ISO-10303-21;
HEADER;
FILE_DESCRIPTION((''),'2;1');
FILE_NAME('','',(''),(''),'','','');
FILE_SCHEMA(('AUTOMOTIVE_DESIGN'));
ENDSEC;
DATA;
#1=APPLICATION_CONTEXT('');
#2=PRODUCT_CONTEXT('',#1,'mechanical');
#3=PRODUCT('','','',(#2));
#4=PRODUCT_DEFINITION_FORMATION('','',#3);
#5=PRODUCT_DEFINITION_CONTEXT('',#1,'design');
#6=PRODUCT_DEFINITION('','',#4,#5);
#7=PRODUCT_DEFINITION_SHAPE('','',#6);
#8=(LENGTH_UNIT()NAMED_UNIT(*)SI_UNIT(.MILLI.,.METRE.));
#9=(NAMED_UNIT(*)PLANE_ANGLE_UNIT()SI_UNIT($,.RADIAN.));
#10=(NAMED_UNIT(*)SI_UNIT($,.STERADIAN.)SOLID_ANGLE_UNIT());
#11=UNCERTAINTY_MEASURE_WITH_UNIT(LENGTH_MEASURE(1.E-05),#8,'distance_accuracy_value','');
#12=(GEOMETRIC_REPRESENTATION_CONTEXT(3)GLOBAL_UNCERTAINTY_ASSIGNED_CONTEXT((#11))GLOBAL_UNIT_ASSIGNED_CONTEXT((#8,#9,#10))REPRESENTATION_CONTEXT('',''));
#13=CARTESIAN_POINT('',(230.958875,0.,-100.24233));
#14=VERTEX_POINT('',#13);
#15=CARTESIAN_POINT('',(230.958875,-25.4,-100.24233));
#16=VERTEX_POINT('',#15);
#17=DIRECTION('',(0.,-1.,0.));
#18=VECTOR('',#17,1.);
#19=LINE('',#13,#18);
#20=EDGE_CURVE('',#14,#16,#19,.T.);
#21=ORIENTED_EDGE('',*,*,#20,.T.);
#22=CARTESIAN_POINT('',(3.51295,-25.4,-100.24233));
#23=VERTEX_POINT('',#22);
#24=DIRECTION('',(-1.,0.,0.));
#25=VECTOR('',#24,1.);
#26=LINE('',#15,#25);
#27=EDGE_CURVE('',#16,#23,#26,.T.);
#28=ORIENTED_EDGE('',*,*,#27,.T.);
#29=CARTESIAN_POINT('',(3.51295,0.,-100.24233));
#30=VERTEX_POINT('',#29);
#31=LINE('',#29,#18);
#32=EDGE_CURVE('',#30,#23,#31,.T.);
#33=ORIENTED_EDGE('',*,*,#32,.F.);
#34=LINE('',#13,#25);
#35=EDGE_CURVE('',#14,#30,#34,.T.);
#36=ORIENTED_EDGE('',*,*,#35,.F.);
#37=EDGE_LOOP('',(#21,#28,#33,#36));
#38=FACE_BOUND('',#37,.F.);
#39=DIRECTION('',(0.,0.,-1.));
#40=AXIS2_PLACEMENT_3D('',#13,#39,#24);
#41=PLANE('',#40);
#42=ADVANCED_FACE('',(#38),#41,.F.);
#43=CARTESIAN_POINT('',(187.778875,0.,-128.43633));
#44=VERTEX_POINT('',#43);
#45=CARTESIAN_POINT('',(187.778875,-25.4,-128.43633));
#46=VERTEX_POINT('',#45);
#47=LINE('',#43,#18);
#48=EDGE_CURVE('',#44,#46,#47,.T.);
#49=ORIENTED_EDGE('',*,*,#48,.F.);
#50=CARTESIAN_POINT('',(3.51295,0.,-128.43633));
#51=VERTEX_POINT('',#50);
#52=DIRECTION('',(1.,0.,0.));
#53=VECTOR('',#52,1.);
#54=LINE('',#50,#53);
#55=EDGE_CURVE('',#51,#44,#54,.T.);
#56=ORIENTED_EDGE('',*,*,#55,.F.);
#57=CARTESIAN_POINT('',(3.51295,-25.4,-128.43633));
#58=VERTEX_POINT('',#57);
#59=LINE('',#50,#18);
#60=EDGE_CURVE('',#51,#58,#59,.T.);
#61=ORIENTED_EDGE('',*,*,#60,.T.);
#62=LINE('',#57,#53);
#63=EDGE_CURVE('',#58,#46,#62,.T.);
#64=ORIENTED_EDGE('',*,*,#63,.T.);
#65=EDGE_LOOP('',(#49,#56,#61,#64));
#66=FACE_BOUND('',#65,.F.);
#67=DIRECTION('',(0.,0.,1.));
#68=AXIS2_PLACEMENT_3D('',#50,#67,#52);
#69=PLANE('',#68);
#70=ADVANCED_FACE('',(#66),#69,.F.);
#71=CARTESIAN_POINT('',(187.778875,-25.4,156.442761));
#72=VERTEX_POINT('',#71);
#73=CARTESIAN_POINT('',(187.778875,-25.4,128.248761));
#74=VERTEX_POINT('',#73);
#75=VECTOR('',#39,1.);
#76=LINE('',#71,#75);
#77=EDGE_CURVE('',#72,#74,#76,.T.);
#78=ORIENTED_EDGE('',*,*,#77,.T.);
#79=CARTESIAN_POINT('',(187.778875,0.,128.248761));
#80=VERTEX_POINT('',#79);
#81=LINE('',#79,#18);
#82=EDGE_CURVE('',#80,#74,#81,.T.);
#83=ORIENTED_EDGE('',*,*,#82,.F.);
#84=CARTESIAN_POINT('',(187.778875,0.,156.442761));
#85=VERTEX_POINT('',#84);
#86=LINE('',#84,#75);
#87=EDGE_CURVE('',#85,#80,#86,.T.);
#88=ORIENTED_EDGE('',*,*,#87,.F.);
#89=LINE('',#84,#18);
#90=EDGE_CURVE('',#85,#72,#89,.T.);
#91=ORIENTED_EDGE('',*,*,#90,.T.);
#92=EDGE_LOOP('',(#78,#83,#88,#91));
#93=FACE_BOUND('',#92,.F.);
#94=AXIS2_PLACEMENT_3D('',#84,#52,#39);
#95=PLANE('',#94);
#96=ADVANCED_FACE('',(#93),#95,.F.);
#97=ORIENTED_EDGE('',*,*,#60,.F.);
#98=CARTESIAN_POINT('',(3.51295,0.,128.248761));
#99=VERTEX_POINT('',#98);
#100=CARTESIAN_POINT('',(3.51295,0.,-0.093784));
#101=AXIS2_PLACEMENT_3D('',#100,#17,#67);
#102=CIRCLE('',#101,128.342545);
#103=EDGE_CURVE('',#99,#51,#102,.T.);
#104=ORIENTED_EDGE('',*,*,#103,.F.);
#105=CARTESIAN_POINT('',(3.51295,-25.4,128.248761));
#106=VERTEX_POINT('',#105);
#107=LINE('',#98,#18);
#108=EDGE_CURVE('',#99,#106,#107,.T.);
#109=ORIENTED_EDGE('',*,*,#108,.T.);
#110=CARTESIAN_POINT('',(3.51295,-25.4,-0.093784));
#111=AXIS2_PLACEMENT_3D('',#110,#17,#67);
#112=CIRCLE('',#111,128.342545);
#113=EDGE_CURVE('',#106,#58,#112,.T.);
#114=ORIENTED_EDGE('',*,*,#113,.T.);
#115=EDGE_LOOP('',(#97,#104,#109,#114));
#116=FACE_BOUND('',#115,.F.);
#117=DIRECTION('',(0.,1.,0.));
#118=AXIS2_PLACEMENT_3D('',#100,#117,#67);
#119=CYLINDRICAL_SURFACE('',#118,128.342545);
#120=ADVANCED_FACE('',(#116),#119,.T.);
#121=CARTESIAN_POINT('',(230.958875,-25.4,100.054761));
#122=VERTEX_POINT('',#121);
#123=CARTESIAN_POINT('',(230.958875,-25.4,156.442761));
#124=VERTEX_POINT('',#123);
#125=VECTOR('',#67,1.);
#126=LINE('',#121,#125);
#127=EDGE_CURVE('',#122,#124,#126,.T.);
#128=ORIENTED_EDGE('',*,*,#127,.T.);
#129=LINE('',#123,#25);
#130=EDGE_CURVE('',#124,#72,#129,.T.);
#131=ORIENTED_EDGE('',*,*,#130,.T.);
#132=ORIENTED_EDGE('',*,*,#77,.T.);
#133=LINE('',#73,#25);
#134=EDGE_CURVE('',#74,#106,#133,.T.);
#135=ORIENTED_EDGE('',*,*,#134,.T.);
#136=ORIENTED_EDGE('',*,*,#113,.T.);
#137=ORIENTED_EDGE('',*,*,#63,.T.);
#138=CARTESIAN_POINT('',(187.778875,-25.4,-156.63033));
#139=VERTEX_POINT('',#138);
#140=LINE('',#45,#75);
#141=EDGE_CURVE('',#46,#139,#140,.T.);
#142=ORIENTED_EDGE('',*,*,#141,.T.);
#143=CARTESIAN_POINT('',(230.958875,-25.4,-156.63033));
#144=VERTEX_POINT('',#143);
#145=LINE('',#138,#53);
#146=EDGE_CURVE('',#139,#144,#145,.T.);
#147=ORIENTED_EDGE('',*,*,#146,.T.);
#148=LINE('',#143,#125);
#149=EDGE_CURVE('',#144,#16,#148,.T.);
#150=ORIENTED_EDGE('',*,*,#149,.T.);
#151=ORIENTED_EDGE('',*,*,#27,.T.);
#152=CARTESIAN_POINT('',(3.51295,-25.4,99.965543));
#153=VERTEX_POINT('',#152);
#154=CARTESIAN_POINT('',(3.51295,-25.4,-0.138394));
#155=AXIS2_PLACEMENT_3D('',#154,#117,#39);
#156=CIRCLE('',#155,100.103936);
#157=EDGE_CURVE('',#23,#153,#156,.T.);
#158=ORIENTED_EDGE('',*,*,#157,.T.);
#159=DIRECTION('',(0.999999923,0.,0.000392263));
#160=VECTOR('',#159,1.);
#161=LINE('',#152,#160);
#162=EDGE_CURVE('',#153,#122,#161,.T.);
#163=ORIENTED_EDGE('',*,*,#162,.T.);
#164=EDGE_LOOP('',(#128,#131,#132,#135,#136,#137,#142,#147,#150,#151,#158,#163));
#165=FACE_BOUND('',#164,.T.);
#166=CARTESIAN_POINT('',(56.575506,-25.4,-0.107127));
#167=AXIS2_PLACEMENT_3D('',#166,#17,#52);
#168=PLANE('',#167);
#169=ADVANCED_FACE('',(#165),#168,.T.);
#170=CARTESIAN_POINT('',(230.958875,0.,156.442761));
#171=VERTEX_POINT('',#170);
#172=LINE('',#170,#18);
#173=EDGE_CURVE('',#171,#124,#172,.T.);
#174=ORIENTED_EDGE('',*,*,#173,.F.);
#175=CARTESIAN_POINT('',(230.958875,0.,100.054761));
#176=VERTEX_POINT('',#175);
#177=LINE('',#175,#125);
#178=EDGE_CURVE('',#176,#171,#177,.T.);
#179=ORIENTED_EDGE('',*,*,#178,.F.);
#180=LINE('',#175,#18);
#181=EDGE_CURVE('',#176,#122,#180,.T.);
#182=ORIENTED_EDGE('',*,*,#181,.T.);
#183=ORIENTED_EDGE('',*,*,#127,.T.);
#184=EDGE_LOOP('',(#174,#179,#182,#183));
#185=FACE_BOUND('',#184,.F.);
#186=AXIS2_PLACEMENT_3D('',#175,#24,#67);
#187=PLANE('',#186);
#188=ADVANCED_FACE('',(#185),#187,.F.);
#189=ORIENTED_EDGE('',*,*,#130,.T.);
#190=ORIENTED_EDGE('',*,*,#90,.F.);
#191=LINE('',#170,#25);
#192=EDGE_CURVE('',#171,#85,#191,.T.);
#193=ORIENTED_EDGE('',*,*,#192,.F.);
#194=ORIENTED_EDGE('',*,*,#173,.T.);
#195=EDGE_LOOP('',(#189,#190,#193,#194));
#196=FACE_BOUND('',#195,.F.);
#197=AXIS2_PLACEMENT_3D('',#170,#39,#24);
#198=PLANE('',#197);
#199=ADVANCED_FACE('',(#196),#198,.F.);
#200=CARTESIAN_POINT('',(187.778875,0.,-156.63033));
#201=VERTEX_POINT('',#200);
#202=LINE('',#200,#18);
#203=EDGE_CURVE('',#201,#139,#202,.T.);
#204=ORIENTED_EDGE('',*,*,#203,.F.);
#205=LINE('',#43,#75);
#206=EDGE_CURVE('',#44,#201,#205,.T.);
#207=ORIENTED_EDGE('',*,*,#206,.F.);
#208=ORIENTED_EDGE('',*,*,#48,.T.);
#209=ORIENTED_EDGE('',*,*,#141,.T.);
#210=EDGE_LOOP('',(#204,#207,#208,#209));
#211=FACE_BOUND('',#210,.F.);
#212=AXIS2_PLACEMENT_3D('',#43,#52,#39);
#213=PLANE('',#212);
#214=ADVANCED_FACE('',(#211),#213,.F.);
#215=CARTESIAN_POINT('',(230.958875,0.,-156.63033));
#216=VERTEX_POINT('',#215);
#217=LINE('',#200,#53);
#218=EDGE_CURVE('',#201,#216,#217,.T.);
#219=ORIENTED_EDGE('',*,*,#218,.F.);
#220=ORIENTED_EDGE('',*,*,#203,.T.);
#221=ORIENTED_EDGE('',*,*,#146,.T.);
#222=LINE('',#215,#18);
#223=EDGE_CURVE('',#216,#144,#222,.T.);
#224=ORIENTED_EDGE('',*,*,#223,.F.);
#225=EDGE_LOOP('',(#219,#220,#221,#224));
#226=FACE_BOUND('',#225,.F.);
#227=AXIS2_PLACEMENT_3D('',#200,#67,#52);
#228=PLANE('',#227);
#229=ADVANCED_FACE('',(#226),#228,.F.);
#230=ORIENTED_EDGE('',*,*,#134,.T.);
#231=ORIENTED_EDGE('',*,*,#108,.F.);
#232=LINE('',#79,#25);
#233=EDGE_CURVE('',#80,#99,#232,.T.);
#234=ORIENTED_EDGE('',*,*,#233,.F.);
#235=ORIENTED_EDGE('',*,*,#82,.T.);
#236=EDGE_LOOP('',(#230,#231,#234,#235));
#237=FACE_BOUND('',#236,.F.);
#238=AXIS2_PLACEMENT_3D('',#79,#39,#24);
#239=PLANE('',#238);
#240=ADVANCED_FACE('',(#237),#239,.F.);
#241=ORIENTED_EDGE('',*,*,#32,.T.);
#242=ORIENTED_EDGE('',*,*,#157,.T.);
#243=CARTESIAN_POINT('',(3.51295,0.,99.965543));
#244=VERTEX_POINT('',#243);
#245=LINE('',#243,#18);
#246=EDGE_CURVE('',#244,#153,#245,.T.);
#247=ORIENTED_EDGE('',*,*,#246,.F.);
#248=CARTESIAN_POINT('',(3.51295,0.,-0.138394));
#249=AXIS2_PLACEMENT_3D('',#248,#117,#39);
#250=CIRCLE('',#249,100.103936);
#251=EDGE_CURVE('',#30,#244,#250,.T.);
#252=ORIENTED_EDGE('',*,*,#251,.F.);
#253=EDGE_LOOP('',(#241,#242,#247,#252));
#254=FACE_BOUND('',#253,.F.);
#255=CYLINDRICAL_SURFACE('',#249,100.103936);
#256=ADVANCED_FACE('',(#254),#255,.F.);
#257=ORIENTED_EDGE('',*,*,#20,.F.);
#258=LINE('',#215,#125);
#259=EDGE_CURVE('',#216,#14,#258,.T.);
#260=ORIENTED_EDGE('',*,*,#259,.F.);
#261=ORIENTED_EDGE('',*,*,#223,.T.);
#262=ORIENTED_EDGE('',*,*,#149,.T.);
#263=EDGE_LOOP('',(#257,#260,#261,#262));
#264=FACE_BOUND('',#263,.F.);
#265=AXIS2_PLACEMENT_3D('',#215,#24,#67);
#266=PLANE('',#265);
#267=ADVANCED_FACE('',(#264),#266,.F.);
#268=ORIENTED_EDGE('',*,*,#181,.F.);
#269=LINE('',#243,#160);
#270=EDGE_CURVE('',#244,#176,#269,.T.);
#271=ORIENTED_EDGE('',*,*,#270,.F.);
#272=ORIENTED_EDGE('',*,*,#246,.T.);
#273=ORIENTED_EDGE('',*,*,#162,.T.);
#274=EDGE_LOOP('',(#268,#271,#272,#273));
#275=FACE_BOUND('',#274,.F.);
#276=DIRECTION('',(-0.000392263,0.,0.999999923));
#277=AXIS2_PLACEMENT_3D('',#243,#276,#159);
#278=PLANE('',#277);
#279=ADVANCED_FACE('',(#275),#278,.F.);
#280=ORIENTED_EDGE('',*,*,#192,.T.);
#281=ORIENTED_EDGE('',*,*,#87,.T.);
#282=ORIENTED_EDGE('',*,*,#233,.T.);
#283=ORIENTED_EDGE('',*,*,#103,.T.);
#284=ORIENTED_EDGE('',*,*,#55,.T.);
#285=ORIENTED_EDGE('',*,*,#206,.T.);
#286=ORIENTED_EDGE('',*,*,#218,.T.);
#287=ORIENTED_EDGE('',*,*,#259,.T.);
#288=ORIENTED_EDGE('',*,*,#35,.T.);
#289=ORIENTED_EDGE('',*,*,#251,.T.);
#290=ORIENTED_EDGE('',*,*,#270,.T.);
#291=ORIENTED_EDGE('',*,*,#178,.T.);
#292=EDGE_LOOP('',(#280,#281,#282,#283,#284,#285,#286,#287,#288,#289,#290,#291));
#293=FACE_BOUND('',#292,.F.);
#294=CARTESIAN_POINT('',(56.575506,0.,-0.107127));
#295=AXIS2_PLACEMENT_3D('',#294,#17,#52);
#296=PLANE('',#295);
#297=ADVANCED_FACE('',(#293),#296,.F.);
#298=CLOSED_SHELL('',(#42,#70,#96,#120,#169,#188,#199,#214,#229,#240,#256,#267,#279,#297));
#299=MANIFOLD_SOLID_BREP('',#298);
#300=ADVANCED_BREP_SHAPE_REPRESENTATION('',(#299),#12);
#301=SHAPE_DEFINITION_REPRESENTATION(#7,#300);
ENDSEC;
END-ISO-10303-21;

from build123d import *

# Parameters (mm, degrees)
F1_DEPTH = 25.4


# Not quite as in the source:
# - a feature names something its author has since deleted; it is built from what else it names


with BuildPart() as f1:
    # F0 (on Front) → F1 (new body)
    with BuildSketch(Plane.XZ):
        with BuildLine():
            ThreePointArc((3.5129496086, 128.2487611501), (-124.8295958309, -0.0937842894), (3.5129496086, -128.4363297289))
            Line((3.5129496086, -128.4363297289), (187.7788752317, -128.4363297289))
            Line((187.7788752317, -128.4363297289), (187.7788752317, -156.6303297289))
            Line((187.7788752317, -156.6303297289), (230.9588752317, -156.6303297289))
            Line((230.9588752317, -156.6303297289), (230.9588752317, -128.4363297289))
            Line((230.9588752317, -128.4363297289), (230.9588752317, -100.2423297289))
            Line((230.9588752317, -100.2423297289), (3.5129496086, -100.2423297289))
            ThreePointArc((3.5129496086, -100.2423297289), (-96.5909865333, -0.138393587), (3.5129496086, 99.9655425549))
            Line((3.5129496086, 99.9655425549), (230.9588752317, 100.0547611501))
            Line((230.9588752317, 100.0547611501), (230.9588752317, 128.2487611501))
            Line((230.9588752317, 128.2487611501), (230.9588752317, 156.4427611501))
            Line((230.9588752317, 156.4427611501), (187.7788752317, 156.4427611501))
            Line((187.7788752317, 156.4427611501), (187.7788752317, 128.2487611501))
            Line((187.7788752317, 128.2487611501), (3.5129496086, 128.2487611501))
        make_face()
    extrude(amount=F1_DEPTH)


solid = f1.part
